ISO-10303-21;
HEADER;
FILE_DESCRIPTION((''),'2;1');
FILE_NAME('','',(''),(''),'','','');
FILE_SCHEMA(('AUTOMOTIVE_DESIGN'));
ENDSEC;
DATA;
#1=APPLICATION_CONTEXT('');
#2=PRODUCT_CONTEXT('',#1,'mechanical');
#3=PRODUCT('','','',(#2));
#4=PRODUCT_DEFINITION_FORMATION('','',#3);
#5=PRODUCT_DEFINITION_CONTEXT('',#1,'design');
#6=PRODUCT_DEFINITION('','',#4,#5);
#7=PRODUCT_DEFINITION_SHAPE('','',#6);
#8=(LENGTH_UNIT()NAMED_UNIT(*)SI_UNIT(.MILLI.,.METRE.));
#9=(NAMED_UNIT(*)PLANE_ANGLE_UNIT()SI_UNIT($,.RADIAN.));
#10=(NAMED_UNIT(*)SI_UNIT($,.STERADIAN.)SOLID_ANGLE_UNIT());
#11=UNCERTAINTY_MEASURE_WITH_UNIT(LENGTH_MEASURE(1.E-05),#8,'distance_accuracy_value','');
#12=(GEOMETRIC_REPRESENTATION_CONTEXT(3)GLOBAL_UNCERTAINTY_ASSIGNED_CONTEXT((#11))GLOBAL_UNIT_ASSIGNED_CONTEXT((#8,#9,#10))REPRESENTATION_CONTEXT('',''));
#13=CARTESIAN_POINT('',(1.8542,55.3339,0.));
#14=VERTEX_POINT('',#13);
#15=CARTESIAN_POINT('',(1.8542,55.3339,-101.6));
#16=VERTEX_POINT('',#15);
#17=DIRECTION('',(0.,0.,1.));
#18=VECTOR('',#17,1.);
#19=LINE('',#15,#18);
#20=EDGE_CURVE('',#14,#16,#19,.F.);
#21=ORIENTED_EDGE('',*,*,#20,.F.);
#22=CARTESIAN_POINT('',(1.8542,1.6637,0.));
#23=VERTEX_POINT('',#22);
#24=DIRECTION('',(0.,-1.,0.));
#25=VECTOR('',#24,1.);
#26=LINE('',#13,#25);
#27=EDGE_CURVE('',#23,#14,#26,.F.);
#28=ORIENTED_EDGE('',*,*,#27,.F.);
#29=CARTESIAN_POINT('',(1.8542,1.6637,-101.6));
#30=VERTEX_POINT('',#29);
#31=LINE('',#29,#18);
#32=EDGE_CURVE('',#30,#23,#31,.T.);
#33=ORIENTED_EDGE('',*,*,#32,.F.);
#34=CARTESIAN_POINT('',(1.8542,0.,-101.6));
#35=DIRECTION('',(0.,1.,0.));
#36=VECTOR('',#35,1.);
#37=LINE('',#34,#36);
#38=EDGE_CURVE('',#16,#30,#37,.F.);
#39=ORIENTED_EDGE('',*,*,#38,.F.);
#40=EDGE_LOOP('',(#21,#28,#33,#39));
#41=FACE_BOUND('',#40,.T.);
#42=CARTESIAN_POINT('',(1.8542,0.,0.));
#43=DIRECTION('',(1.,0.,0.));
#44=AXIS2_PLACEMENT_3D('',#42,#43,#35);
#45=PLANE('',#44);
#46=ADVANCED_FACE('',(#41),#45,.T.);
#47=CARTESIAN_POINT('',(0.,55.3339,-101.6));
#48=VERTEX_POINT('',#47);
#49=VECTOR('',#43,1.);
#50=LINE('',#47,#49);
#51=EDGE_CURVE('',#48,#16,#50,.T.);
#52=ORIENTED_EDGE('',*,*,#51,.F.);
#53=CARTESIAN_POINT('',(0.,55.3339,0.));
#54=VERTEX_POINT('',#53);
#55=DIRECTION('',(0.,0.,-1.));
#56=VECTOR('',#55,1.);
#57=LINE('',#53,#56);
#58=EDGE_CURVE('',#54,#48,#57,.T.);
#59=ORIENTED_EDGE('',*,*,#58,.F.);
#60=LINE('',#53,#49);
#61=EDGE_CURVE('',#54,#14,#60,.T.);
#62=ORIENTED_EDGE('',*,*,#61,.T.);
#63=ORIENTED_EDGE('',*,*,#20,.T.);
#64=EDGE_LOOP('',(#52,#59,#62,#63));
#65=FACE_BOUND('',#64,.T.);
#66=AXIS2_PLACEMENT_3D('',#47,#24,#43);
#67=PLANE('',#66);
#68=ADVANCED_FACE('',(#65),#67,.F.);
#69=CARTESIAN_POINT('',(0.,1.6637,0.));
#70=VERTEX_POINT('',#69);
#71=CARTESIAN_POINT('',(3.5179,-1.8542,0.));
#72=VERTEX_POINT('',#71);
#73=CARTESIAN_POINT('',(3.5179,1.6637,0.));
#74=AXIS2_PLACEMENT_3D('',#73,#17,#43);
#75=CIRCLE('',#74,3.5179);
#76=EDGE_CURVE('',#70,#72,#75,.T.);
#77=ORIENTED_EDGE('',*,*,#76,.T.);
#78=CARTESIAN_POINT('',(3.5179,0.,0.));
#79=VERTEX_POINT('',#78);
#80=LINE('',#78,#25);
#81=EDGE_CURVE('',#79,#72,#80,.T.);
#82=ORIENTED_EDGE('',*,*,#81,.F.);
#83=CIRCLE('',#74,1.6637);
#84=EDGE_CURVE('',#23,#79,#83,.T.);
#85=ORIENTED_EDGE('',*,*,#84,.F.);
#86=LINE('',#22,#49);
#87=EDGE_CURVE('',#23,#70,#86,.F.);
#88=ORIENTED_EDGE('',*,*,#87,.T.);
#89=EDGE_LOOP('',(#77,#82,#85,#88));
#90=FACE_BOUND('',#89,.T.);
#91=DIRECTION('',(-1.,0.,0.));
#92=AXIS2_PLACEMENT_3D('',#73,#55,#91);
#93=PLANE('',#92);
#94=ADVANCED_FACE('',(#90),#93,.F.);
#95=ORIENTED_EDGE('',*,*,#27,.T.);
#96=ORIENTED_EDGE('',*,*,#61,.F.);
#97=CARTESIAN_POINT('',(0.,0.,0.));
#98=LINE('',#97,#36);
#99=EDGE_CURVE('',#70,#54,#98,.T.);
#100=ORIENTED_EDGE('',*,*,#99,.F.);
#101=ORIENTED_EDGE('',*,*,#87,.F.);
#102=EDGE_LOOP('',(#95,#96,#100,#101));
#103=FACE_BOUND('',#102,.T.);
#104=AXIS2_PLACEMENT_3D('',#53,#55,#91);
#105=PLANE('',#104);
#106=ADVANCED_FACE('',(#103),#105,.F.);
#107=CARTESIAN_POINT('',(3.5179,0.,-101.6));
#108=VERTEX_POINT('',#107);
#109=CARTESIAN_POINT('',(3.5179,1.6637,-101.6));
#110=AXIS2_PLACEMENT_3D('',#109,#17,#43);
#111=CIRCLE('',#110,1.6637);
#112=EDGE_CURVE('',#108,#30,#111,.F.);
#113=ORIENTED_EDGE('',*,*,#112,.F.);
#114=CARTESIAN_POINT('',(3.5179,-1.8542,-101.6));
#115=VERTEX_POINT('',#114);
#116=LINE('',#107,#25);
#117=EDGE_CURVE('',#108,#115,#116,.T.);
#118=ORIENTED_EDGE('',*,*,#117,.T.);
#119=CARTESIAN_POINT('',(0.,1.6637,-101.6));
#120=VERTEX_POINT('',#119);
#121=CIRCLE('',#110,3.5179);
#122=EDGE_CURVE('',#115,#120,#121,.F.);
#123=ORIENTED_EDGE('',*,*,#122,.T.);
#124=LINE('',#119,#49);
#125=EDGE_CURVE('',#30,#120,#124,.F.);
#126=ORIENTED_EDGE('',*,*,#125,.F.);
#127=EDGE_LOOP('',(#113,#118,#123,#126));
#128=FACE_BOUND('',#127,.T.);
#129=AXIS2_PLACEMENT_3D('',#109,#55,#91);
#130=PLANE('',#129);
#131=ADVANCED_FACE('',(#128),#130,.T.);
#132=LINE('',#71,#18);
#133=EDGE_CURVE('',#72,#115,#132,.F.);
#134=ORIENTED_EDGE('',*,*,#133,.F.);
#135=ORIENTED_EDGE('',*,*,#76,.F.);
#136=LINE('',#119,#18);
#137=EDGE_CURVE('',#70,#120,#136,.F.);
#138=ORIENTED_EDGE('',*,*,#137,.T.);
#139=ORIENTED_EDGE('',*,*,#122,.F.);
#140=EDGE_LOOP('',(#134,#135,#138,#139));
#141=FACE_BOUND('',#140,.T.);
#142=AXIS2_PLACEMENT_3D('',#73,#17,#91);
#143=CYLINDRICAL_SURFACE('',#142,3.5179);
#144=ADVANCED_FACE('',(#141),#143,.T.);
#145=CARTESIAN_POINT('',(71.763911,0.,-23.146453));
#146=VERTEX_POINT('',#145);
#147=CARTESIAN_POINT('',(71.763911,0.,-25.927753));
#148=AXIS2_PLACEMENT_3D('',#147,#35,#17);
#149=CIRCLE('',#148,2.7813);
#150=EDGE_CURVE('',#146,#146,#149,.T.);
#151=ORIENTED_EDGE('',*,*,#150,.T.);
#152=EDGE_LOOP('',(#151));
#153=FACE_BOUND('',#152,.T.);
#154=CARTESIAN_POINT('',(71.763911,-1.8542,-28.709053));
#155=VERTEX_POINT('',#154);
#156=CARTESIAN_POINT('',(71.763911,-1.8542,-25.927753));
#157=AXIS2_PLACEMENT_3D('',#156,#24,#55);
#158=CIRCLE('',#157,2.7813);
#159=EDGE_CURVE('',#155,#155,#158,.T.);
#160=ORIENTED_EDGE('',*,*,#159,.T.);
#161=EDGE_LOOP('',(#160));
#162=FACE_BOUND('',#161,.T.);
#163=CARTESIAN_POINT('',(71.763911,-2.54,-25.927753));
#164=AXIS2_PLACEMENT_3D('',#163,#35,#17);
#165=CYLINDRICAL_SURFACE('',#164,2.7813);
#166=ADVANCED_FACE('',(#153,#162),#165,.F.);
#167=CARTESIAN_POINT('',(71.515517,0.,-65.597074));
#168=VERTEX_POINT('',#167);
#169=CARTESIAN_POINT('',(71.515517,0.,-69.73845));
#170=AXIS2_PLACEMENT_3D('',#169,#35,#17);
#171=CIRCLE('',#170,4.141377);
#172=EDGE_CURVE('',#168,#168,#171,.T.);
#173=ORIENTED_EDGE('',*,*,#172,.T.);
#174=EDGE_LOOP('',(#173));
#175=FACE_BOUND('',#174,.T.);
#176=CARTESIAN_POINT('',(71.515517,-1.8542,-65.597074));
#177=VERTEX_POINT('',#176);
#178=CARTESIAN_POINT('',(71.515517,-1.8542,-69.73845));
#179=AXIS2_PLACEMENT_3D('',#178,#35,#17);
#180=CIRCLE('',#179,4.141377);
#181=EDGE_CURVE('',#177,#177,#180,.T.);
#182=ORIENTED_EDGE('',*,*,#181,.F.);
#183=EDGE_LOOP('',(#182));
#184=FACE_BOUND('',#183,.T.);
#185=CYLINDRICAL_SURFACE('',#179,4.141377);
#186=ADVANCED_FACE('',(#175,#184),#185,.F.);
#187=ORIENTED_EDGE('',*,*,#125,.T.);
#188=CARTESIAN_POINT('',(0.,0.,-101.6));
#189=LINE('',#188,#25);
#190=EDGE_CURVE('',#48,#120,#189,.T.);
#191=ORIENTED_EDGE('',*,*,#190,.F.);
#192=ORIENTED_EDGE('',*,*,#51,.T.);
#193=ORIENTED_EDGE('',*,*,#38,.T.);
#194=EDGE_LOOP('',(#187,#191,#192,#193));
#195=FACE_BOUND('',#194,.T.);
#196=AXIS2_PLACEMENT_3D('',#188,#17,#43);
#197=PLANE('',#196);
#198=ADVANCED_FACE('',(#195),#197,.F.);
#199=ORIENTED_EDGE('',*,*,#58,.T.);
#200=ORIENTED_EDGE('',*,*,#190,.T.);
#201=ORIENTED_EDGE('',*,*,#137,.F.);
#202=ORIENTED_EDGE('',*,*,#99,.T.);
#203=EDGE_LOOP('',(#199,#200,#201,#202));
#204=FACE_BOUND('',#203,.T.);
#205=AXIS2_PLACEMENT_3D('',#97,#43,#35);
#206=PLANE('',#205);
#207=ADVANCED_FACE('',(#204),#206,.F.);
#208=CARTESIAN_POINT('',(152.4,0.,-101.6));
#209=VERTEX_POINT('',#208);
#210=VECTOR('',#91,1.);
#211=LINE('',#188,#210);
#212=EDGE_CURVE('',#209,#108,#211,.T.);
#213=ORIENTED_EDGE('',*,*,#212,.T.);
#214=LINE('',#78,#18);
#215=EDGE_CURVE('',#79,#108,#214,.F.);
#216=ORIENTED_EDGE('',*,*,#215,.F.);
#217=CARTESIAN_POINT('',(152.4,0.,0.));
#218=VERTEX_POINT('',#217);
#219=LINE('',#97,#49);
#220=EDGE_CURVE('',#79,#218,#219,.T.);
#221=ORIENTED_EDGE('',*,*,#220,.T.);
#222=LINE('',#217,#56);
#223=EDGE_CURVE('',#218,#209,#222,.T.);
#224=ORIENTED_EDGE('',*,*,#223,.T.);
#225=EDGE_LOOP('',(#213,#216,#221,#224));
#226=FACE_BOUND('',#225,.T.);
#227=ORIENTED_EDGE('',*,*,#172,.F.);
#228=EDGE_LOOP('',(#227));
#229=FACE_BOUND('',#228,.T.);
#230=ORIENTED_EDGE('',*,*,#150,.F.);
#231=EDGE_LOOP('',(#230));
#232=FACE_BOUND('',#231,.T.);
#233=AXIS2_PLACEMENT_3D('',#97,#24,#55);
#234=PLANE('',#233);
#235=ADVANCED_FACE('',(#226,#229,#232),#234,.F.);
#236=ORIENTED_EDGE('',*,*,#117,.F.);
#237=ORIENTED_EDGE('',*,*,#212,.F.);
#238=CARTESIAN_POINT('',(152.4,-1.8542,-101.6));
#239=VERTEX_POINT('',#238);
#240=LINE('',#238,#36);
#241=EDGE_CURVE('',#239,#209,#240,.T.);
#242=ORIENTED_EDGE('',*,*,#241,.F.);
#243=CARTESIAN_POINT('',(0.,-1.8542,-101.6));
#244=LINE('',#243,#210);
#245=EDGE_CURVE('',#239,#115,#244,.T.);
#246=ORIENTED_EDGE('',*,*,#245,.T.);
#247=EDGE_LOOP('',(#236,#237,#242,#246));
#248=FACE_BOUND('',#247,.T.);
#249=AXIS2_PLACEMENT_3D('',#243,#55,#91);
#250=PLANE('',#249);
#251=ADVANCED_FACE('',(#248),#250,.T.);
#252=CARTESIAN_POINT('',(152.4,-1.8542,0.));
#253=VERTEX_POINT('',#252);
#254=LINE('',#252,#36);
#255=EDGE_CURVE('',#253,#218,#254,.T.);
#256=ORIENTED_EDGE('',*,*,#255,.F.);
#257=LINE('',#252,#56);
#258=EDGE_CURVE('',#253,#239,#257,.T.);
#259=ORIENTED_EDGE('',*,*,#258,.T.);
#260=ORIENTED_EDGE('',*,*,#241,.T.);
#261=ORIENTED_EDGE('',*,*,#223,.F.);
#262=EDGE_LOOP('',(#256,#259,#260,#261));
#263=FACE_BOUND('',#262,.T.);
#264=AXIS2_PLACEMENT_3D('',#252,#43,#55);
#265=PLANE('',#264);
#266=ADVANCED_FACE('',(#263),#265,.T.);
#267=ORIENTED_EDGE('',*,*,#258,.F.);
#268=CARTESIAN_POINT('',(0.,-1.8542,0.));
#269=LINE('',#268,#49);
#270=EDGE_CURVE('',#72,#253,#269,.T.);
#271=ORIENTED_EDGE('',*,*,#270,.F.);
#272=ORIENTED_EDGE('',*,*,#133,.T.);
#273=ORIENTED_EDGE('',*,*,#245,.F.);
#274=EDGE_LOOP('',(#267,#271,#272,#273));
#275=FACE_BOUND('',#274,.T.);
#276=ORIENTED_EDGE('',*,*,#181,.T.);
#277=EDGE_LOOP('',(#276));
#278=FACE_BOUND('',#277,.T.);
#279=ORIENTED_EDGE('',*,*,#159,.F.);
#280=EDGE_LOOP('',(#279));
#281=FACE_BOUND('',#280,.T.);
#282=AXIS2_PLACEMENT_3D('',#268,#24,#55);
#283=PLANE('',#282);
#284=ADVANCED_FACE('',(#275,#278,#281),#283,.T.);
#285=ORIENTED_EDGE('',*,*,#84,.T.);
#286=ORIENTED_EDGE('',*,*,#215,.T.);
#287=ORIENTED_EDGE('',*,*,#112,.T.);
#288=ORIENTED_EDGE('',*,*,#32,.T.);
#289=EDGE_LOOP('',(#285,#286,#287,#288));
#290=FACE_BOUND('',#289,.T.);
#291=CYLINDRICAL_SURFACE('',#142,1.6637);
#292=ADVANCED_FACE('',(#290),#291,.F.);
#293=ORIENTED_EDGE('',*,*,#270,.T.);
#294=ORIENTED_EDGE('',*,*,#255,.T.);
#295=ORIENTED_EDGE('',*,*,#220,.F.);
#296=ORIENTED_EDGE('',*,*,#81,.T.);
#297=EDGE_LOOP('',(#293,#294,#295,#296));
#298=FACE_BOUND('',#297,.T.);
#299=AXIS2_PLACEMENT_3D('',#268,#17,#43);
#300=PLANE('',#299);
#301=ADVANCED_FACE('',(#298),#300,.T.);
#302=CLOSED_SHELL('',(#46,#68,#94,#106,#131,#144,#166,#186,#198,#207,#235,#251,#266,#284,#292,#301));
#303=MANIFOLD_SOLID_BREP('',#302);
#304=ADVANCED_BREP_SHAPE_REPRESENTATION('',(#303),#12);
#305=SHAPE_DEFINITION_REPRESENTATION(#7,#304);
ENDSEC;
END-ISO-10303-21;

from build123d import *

# Parameters (mm, degrees)
SKETCH1_W                    = 152.4
SKETCH1_H                    = 101.6
BASE_FLANGE1_DEPTH           = 1.8542
EDGE_FLANGE1_STRIP_W         = 10.7442
EDGE_FLANGE1_STRIP_H         = 1.8542
EDGE_FLANGE1_STRIP_CUT_DEPTH = 101.6
EDGE_FLANGE1_DEPTH           = 101.6
SKETCH14_R                   = 2.7813
TAP_1_4_20_HOLE1_DEPTH       = 2.54
SKETCH15_R                   = 4.1413765
TAPPED_3_8_16_HOLE2_DEPTH    = 2.54


# Sheet-metal steps are written as plain solids
with BuildPart() as part:
    # Sketch1 → Base-Flange1 (new body)
    with BuildSketch(Plane(origin=(0, 0, 0), x_dir=(1, 0, 0), z_dir=(0, 1, 0))):
        with Locations((76.2, 50.8)):
            Rectangle(SKETCH1_W, SKETCH1_H)
    extrude(amount=-BASE_FLANGE1_DEPTH)

    # Edge-Flange1 strip (across the edge) → Edge-Flange1 strip cut (cut)
    with BuildSketch(Plane.XY.offset(-101.6)):
        with Locations((-1.8542, -0.9271)):
            Rectangle(EDGE_FLANGE1_STRIP_W, EDGE_FLANGE1_STRIP_H)
    extrude(amount=EDGE_FLANGE1_STRIP_CUT_DEPTH, mode=Mode.SUBTRACT)

    # Edge-Flange1 section (across the edge) → Edge-Flange1 (add)
    with BuildSketch(Plane.XY.offset(-101.6)):
        with BuildLine():
            Line((0, 1.6637), (0, 55.3339))
            Line((0, 55.3339), (1.8542, 55.3339))
            Line((1.8542, 55.3339), (1.8542, 1.6637))
            ThreePointArc((1.8542, 1.6637), (2.341486448, 0.487286448), (3.5179, 0))
            Line((3.5179, 0), (3.5179, -1.8542))
            ThreePointArc((3.5179, -1.8542), (1.030369054, -0.823830946), (0, 1.6637))
        make_face()
    extrude(amount=EDGE_FLANGE1_DEPTH)

    # Sketch14 → TAP 1/4-20 Hole1 (cut)
    with BuildSketch(Plane(origin=(0, 0, 0), x_dir=(1, 0, 0), z_dir=(0, 1, 0))):
        with Locations(Location((71.763910774, 25.92775269, 0), (0, 0, 270))):
            Circle(SKETCH14_R)
    extrude(amount=-TAP_1_4_20_HOLE1_DEPTH, mode=Mode.SUBTRACT)

    # Sketch15 → TAPPED 3/8-16 Hole2 (cut)
    with BuildSketch(Plane(origin=(0, 0, 0), x_dir=(1, 0, 0), z_dir=(0, 1, 0))):
        with Locations(Location((71.515516592, 69.738450307, 0), (0, 0, 270))):
            Circle(SKETCH15_R)
    extrude(amount=-TAPPED_3_8_16_HOLE2_DEPTH, mode=Mode.SUBTRACT)


solid = part.part
